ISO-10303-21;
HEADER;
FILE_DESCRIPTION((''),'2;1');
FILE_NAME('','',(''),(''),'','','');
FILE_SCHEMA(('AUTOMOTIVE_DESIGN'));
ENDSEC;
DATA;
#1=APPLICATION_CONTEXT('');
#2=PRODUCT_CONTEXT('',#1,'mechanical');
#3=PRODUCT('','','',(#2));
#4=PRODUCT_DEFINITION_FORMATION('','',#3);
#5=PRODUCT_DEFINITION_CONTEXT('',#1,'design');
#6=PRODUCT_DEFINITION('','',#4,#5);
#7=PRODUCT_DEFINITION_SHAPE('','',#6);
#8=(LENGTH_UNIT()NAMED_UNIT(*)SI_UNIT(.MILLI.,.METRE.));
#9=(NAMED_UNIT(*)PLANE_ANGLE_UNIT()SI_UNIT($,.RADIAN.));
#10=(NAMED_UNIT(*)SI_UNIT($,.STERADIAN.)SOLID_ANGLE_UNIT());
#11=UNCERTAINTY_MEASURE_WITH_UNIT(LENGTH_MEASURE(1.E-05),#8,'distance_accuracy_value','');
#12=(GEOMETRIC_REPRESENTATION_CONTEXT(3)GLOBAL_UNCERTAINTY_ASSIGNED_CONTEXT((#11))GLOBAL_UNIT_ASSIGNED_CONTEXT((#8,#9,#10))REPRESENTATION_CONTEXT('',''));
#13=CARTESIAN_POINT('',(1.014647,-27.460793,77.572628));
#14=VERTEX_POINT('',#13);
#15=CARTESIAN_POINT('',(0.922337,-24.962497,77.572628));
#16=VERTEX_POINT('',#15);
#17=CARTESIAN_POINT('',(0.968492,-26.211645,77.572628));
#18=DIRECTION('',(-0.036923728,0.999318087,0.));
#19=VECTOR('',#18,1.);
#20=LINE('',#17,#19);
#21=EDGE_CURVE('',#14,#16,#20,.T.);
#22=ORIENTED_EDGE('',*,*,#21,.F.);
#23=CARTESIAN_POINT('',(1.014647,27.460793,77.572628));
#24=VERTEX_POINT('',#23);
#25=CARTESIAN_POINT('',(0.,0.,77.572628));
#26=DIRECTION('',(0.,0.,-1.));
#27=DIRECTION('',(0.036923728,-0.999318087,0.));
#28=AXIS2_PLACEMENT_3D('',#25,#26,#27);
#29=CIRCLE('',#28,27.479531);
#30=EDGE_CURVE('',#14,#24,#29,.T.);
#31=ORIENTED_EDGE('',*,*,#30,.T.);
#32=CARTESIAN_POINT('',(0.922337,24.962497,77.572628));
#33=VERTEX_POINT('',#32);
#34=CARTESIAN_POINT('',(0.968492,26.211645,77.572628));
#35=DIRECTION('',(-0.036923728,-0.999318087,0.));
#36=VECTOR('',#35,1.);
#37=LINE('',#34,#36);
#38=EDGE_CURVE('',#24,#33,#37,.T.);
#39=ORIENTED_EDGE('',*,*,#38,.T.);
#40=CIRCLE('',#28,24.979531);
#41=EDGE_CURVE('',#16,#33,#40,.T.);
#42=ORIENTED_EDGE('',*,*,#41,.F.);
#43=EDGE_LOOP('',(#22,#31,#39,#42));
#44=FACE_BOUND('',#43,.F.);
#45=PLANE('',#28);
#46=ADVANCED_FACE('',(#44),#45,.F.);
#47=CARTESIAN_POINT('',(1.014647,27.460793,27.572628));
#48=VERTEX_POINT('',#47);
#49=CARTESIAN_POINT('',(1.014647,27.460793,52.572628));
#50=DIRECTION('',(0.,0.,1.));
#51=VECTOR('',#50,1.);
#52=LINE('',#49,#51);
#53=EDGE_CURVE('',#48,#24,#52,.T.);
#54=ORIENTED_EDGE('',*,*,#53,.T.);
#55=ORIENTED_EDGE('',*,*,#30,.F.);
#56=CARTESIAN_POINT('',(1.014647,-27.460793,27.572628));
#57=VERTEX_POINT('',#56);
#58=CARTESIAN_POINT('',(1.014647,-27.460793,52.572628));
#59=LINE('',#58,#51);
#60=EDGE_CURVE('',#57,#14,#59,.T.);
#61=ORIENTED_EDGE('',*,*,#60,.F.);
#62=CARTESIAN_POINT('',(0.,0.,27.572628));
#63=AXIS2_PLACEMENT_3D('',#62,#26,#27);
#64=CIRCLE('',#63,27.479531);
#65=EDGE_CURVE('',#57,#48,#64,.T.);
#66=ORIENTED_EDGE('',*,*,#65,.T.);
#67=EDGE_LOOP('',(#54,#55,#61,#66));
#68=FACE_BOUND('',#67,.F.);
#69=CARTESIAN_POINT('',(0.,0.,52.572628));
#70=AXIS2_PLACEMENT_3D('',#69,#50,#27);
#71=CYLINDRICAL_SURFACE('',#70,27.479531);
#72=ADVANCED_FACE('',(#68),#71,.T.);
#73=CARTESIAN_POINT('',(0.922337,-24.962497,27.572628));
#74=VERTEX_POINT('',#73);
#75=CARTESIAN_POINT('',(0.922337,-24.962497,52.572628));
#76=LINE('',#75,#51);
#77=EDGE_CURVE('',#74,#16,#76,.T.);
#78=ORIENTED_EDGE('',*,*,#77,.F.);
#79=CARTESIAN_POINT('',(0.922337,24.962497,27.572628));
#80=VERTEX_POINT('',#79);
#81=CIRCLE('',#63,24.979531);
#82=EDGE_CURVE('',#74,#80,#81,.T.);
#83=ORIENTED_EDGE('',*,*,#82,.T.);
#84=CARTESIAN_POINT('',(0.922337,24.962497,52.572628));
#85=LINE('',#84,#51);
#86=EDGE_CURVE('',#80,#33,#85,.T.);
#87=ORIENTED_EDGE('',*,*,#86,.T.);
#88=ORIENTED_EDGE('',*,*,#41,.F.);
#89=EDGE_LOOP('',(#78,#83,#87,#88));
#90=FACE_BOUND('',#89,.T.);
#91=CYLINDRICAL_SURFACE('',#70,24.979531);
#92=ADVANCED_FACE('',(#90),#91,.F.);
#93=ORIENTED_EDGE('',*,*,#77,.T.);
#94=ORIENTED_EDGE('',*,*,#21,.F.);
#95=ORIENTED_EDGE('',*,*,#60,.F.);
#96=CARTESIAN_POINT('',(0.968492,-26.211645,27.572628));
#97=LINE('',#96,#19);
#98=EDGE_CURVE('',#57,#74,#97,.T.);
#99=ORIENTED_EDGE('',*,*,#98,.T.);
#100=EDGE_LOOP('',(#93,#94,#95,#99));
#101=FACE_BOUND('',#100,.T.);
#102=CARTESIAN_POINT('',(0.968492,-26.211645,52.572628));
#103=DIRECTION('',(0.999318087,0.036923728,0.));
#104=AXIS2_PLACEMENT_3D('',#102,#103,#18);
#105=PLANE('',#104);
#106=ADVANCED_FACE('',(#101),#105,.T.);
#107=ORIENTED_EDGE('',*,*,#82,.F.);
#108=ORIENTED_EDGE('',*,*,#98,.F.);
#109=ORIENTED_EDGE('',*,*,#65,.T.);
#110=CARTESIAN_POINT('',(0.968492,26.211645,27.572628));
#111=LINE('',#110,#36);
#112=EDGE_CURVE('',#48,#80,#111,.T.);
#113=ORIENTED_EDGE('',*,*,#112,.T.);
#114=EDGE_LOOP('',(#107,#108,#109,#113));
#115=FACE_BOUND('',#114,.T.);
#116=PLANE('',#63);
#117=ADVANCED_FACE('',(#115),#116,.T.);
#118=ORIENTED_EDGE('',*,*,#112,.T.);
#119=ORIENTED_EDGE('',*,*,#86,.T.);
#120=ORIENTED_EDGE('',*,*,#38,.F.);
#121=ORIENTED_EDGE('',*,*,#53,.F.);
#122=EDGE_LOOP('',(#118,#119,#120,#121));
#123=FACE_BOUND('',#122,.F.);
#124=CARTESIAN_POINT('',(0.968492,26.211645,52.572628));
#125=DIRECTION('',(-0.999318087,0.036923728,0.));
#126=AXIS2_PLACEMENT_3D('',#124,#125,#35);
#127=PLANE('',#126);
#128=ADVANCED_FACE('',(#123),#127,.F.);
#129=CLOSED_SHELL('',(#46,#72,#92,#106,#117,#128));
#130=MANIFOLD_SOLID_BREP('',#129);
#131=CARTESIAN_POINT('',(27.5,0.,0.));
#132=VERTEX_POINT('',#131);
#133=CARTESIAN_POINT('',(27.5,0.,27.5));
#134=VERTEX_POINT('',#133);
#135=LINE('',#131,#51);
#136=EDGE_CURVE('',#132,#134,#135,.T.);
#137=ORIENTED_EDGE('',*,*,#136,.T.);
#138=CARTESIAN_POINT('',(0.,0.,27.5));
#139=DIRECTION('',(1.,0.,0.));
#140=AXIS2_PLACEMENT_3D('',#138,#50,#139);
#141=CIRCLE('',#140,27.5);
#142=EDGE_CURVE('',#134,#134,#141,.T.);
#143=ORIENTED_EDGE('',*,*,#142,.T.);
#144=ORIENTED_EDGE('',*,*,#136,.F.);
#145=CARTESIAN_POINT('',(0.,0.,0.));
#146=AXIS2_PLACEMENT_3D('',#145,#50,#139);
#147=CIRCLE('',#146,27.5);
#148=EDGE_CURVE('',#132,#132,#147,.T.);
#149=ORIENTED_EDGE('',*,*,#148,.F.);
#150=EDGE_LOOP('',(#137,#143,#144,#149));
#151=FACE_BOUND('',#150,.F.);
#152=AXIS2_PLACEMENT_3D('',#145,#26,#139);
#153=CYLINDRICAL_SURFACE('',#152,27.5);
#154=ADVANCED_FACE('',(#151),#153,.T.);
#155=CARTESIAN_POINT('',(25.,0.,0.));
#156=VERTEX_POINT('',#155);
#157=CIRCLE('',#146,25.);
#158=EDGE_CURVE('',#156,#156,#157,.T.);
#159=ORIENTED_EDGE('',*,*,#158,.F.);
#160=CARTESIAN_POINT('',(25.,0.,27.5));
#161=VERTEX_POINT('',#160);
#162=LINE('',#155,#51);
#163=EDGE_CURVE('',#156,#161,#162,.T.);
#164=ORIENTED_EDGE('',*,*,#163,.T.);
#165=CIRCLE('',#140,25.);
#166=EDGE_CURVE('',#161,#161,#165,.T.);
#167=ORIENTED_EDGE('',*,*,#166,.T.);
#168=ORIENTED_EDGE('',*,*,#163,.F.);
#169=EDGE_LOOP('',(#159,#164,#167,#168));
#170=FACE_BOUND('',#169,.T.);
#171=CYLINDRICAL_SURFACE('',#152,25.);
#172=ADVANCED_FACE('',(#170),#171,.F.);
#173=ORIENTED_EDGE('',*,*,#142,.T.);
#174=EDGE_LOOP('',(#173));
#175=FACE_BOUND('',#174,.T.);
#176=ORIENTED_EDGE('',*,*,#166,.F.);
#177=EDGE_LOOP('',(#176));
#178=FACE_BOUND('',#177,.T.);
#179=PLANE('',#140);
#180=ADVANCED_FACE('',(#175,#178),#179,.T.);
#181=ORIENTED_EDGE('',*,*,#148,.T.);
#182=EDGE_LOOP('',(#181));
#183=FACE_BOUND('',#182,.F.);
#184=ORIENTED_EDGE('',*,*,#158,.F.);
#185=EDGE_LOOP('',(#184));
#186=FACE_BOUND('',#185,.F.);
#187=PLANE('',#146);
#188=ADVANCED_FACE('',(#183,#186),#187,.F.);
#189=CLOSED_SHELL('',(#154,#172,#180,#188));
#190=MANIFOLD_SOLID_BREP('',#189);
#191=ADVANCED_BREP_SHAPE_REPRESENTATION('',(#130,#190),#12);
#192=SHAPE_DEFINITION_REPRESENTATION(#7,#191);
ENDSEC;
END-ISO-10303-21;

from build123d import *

# Parameters (mm, degrees)
F0_R          = 27.5
F0_R_2        = 25
F1_DEPTH      = 27.5
F2_W          = 2.5
F2_H          = 50
F3_ANGLE_BACK = 92.1160547881
F3_ANGLE      = 184.2321095762


# Not quite as in the source:
# - a feature of the source that left no trace in its solid (it failed there, or was rolled back) is left out


with BuildPart() as f1:
    # F0 (on Top) → F1 (new body)
    with BuildSketch(Plane.XY):
        Circle(F0_R)
        Circle(F0_R_2, mode=Mode.SUBTRACT)
    extrude(amount=F1_DEPTH)


with BuildPart() as f3:
    # F2 (on Front) → F3 (revolve)
    with BuildSketch(Plane.XZ, mode=Mode.PRIVATE) as f3_sk:
        with Locations((-26.2295312434, 52.5726281106)):
            Rectangle(F2_W, F2_H)
    revolve(f3_sk.sketch.rotate(Axis((0, 0, 0), (0, 0, -1)), -F3_ANGLE_BACK), axis=Axis((0, 0, 0), (0, 0, -1)), revolution_arc=F3_ANGLE)


solid = Compound([f1.part, f3.part])
